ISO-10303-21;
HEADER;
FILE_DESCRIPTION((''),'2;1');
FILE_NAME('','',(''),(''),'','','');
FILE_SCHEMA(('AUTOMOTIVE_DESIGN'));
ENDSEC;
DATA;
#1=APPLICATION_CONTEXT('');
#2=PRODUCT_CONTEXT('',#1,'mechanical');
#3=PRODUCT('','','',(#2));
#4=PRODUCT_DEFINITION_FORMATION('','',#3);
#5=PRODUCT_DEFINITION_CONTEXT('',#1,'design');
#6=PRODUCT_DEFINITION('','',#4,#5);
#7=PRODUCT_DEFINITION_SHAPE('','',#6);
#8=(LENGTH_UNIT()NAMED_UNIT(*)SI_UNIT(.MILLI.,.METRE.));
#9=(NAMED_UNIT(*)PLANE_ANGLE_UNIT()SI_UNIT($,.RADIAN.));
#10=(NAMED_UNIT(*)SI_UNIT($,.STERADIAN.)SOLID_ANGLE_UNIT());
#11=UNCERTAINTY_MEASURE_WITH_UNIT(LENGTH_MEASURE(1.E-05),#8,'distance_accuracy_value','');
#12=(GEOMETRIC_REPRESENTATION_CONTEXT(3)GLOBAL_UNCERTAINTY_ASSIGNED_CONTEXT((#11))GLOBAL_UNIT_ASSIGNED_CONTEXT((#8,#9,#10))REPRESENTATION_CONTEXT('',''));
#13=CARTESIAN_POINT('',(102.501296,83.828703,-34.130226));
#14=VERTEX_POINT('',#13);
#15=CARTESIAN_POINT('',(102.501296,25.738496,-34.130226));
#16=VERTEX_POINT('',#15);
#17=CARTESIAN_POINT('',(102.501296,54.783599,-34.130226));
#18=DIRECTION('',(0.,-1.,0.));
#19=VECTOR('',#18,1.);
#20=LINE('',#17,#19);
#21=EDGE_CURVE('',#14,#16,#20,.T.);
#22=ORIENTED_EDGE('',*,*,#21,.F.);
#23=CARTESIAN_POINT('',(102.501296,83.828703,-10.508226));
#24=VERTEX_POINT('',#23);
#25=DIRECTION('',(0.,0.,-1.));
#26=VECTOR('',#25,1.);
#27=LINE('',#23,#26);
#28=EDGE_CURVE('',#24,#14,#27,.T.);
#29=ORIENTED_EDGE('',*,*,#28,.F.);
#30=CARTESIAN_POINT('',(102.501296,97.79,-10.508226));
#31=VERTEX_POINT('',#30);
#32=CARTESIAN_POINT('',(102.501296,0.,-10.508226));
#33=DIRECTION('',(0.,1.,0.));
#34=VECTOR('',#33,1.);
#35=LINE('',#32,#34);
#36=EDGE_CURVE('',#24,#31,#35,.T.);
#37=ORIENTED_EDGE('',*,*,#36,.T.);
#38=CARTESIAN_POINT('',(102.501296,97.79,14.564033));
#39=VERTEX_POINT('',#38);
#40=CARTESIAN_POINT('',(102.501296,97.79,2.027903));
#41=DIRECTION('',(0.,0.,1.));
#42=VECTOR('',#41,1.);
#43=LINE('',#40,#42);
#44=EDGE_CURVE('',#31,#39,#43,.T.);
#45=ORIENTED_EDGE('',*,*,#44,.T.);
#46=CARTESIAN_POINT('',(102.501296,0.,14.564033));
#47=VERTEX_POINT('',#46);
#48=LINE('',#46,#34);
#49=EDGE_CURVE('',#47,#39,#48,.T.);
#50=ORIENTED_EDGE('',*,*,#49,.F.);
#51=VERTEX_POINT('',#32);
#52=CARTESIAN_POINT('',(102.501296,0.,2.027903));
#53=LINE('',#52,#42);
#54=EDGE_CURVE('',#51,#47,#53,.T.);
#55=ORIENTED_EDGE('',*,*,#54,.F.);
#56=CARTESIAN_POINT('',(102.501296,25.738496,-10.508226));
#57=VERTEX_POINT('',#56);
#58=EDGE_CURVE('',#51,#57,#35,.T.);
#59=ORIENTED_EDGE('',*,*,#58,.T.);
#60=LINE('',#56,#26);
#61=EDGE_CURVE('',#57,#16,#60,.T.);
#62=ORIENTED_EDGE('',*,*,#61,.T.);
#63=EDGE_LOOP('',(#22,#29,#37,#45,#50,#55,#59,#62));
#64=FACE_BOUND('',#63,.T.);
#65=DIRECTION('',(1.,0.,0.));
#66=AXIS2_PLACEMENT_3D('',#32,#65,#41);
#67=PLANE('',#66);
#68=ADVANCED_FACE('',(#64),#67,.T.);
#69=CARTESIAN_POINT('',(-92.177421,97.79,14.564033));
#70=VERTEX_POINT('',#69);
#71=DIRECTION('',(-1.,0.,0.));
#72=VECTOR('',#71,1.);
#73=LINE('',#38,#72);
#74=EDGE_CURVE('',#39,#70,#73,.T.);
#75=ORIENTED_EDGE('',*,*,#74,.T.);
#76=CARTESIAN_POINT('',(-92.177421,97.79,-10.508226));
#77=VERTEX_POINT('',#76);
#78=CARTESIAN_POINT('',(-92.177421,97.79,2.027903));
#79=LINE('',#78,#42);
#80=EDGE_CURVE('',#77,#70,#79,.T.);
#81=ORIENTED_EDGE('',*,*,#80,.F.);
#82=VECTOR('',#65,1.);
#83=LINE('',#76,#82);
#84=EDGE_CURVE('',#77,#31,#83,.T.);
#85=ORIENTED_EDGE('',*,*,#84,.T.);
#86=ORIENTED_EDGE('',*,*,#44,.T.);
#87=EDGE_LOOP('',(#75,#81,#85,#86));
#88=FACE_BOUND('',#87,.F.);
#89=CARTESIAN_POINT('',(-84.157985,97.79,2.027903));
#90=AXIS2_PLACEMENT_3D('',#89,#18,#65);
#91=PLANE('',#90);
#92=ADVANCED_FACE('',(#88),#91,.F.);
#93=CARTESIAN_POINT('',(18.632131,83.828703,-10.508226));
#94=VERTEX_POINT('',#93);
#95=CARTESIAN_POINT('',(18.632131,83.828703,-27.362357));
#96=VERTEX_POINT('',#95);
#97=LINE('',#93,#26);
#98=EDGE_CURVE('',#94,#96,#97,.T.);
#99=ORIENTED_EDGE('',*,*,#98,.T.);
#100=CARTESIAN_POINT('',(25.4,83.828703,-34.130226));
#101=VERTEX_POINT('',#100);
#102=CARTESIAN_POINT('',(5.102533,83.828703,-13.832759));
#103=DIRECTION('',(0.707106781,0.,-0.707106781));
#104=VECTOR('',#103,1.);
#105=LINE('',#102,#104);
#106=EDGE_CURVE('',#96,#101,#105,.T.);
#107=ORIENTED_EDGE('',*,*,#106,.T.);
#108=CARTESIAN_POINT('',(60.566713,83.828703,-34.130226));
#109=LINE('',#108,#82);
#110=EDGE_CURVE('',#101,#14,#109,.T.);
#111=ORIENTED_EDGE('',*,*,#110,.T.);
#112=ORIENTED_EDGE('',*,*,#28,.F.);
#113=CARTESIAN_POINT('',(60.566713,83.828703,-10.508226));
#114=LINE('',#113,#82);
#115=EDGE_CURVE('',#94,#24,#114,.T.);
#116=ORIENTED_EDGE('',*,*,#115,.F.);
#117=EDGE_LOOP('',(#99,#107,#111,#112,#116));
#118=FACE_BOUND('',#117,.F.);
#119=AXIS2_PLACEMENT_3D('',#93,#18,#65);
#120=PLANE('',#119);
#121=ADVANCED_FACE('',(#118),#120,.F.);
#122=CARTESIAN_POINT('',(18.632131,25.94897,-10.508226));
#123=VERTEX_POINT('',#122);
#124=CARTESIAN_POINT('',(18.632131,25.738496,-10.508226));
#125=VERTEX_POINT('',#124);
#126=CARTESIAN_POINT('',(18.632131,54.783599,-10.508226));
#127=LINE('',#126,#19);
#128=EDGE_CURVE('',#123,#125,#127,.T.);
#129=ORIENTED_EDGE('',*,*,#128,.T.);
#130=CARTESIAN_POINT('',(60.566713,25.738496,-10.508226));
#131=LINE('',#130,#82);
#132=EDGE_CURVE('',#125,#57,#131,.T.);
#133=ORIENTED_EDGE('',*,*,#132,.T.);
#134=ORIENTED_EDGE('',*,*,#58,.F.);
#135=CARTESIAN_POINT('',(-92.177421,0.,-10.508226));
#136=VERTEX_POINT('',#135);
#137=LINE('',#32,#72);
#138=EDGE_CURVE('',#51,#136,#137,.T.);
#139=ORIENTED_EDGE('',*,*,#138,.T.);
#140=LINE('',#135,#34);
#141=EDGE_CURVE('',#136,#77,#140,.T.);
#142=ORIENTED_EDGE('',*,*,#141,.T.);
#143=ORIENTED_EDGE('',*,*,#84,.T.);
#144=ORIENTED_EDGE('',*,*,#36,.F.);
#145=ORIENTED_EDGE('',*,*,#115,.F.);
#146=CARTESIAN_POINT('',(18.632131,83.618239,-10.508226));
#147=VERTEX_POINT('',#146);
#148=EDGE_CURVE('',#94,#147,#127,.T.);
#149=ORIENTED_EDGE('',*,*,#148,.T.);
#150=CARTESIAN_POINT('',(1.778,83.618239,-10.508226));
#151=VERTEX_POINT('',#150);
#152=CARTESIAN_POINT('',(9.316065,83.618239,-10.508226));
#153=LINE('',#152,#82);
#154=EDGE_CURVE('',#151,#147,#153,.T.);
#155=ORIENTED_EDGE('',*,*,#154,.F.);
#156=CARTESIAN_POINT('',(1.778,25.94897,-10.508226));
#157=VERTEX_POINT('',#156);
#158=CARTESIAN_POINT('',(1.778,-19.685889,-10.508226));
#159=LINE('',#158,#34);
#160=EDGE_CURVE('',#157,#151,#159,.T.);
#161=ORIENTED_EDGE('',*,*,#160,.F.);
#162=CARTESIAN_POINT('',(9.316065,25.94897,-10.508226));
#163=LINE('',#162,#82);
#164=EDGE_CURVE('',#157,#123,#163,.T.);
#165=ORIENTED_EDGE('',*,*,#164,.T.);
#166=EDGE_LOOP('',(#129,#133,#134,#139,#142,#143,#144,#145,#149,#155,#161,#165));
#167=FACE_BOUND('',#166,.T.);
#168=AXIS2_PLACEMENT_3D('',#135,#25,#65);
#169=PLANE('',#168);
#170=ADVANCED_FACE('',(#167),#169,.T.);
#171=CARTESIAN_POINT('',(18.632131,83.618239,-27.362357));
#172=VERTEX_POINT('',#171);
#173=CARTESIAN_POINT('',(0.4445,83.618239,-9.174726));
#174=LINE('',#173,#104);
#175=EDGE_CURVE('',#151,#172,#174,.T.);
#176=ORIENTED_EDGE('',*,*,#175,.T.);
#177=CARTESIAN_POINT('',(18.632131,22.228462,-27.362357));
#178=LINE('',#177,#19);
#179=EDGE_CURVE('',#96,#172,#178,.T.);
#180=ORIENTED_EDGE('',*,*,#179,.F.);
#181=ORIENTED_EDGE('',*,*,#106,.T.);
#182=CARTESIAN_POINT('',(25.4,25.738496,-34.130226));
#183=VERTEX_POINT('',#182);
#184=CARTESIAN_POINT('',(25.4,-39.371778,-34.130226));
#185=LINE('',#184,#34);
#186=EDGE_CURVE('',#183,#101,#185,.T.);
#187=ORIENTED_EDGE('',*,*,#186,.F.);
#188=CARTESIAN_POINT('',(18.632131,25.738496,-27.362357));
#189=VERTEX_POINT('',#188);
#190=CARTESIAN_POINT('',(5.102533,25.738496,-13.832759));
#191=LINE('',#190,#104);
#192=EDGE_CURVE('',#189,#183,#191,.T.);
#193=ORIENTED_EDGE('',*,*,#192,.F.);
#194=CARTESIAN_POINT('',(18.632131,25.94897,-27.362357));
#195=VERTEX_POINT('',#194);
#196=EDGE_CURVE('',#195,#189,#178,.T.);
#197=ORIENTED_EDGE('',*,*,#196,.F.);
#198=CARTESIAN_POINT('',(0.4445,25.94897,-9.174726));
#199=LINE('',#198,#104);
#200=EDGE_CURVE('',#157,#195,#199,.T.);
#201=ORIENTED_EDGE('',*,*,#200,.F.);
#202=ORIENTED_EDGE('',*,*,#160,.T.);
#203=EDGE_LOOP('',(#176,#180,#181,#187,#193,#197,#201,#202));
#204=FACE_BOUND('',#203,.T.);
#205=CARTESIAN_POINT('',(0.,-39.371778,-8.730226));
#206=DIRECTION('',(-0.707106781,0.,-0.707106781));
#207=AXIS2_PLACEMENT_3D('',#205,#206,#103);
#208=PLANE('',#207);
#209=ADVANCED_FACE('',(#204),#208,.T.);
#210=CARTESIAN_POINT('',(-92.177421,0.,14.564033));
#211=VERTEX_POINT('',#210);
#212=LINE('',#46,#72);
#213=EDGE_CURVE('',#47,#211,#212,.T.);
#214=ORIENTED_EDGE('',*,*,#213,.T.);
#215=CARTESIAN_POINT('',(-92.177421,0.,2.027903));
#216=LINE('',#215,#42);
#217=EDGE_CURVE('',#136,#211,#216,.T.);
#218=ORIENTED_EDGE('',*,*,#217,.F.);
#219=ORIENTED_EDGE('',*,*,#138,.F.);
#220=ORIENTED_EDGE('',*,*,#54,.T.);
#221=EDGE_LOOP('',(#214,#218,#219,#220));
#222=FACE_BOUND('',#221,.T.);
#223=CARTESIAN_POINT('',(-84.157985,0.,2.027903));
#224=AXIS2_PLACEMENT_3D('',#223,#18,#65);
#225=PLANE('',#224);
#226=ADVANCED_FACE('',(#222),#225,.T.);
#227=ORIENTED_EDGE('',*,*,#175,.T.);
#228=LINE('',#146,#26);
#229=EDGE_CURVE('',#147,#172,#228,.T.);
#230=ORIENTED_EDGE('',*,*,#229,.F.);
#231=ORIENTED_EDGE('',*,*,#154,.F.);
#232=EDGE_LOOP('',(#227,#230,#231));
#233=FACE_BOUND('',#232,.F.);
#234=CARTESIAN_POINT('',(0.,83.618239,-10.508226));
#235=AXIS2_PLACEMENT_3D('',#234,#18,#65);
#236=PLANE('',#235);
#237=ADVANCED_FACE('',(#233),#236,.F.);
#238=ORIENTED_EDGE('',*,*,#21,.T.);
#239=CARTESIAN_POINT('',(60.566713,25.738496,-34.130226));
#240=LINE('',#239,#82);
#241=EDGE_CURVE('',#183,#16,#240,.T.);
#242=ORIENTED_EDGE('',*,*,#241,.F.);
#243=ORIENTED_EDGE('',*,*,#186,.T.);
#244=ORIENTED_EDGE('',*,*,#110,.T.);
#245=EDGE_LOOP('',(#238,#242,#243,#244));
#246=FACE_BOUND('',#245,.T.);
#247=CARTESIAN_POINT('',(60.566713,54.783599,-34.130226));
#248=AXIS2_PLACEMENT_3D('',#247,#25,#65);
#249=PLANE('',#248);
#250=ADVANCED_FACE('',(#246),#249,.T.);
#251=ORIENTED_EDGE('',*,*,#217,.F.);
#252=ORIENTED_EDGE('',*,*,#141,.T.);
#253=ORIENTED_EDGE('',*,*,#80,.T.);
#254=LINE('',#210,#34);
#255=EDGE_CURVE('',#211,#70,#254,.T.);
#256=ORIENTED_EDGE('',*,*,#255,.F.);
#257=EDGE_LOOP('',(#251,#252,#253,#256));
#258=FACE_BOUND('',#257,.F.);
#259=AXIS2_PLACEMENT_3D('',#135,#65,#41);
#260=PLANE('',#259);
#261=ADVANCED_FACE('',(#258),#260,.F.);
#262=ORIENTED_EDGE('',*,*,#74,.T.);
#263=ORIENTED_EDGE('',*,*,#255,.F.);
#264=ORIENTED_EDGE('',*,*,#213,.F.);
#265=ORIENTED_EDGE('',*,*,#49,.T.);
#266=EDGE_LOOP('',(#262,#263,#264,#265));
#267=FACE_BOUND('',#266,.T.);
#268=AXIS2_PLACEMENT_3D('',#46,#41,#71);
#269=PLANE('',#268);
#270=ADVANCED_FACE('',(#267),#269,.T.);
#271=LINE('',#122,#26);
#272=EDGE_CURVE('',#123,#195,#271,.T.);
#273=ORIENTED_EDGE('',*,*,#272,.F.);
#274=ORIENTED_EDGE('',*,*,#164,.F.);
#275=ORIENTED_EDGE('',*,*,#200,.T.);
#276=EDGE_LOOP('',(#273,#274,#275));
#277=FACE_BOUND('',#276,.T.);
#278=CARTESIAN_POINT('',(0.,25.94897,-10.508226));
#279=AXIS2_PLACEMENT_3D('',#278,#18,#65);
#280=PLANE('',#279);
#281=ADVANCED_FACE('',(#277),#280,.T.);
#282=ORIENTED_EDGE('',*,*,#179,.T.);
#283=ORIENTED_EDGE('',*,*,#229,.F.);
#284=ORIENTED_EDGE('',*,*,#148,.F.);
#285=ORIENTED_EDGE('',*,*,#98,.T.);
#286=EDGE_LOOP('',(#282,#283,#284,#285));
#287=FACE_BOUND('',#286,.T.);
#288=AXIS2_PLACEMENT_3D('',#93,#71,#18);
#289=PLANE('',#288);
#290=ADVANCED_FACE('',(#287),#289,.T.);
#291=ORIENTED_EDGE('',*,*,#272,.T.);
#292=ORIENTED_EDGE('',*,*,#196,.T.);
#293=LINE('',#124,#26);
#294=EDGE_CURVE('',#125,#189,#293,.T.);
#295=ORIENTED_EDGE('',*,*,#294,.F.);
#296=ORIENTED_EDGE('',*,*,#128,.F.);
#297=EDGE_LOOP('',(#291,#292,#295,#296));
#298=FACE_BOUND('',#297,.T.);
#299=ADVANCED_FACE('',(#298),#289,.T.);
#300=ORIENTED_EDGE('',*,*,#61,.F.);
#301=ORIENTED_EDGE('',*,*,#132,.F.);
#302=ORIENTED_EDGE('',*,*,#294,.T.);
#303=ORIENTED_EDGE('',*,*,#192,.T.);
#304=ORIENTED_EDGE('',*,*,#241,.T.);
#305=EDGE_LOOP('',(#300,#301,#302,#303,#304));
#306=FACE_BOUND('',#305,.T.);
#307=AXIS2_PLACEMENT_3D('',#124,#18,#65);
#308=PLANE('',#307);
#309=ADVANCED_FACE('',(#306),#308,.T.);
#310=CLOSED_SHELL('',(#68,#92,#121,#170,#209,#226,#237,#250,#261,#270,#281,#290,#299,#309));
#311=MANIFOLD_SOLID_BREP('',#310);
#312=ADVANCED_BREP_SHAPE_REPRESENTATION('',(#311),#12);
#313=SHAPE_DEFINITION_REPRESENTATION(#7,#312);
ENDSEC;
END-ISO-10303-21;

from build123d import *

# Parameters (mm, degrees)
F0_W        = 16.0388723016
F0_H        = 25.0722588971
F0_W_2      = 17.1450078487
F0_W_3      = 20.0946815312
F0_H_2      = 7.0054841926
F1_DEPTH    = 97.79
F2_W        = 83.8691648096
F2_H        = 58.0902062356
F4_DEPTH    = 23.622
F5_W        = 18.6321306974
F5_H        = 57.669268921
F6_DEPTH    = 23.622
F7_T4_DEPTH = 188.3107647097


# Not quite as in the source:
# - a fillet or chamfer that OpenCascade refuses, or shapes differently, is made with other operations: its cross-section is extruded or revolved along the edge and cut away or added


with BuildPart() as f1:
    # F0 (on Front) → F1 (new body)
    with BuildSketch(Plane.XZ):
        with Locations((-84.1579847038, 2.0279032178)):
            Rectangle(F0_W, F0_H)
        with Locations((93.9287915826, 2.0279032178)):
            Rectangle(F0_W_2, F0_H)
        Polygon((85.3562876582, 14.5640326664), (-76.138548553, 14.5640326664), (-76.138548553, -10.5082262307), (11.0612912104, -10.5082262307), (53.2785467803, -10.5082262307), (53.2785467803, -3.5027420381), (53.2785467803, 3.5027421545), (73.3732283115, 3.5027421545), (73.3732283115, -3.5027420381), (73.3732283115, -10.5082262307), (85.3562876582, -10.5082262307), align=None)
        with Locations((63.3258875459, 5.82e-08)):
            Rectangle(F0_W_3, F0_H_2)
        with Locations((63.3258875459, -7.0054841344)):
            Rectangle(F0_W_3, F0_H_2)
    extrude(amount=-F1_DEPTH)

    # F2 (on face) → F4 (join)
    with BuildSketch(Plane(origin=(0, 0, -10.5082262307), x_dir=(1, 0, 0), z_dir=(0, 0, -1))):
        with Locations((60.5667131022, -54.7835994512)):
            Rectangle(F2_W, F2_H)
    extrude(amount=F4_DEPTH)

    # F5 (on face) → F6 (join)
    with BuildSketch(Plane(origin=(0, 0, -10.5082262307), x_dir=(1, 0, 0), z_dir=(0, 0, -1))):
        with Locations((9.3160653487, -54.7836041078)):
            Rectangle(F5_W, F5_H)
    extrude(amount=F6_DEPTH)

    # F7: chamfer of 25.4 on 1 edges, made by hand


with BuildPart() as f7_tool2:
    # F7_s3 → F7_t4 (new body)
    with BuildSketch(Plane.XZ.offset(39.371778247)):
        Polygon((0, -8.7302262307), (25.4, -34.1302262307), (0, -34.1302262307), align=None)
    extrude(amount=-F7_T4_DEPTH)

    split(bisect_by=Plane.XY.offset(-10.5082262307), keep=Keep.BOTTOM)


with BuildPart() as f1_1:
    add(f1.part)

    # F7_t1: cut F7_tool2
    add(f7_tool2.part, mode=Mode.SUBTRACT)


solid = f1_1.part
